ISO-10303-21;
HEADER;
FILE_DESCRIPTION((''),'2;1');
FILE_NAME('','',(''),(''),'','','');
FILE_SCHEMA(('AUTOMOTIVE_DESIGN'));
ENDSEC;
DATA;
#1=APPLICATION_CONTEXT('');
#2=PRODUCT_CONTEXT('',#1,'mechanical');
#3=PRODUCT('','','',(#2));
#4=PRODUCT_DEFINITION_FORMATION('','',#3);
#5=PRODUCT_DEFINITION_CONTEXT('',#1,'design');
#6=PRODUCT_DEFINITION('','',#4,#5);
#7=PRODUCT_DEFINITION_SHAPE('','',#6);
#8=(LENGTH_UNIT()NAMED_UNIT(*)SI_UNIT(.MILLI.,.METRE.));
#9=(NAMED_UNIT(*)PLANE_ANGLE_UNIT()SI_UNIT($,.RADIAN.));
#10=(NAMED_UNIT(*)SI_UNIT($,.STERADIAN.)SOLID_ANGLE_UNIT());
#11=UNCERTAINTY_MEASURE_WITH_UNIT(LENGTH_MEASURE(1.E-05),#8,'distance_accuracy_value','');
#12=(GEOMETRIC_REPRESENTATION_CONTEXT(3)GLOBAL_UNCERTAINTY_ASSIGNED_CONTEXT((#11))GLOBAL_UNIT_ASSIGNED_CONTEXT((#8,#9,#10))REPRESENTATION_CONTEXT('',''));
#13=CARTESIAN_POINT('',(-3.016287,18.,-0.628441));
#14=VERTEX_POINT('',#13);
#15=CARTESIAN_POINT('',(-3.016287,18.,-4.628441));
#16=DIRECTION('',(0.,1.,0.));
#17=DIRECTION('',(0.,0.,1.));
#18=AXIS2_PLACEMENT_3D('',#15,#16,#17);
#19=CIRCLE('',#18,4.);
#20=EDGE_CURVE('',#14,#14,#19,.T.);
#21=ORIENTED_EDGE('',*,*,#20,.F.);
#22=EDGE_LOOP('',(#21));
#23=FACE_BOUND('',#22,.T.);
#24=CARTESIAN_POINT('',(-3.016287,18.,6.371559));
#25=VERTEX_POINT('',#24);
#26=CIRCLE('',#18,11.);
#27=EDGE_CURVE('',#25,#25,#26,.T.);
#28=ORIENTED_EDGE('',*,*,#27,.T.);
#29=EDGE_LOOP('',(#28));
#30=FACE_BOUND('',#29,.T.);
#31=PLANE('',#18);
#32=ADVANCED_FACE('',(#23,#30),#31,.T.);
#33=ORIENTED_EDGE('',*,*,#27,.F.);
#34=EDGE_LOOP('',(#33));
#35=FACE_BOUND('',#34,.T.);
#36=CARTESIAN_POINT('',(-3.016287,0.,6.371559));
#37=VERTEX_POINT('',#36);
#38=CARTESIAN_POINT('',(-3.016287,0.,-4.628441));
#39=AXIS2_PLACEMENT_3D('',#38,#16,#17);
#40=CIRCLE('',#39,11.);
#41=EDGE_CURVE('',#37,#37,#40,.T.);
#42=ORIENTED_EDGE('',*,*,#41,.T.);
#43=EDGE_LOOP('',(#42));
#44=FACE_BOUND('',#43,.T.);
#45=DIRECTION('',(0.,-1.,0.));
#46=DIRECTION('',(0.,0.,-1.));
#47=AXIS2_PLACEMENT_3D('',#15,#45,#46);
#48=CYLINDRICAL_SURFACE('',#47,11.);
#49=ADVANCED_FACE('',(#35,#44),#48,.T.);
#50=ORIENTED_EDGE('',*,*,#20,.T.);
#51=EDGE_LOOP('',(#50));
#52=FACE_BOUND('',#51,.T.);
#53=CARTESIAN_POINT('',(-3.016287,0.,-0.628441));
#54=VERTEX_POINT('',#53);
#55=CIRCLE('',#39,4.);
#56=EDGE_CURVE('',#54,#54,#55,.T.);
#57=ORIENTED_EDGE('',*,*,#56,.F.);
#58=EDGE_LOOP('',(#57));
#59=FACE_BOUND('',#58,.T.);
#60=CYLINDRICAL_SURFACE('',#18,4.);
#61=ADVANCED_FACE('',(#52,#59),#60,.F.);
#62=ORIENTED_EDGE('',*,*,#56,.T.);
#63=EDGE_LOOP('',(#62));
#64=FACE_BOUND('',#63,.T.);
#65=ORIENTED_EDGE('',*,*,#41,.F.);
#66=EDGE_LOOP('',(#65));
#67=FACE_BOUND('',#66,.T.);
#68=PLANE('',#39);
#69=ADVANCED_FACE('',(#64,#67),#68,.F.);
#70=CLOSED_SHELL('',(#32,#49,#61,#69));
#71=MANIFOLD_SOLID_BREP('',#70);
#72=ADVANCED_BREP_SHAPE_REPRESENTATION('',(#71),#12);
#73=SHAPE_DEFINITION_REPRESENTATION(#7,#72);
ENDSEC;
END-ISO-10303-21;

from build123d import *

# Parameters (mm, degrees)
SKETCH1_R               = 11
BOSS_EXTRUDE1_DEPTH     = 18
ADVANCEDHOLE1_OUTLINE_R = 4
ADVANCEDHOLE1_DEPTH     = 18


# Read off the part's stored shape, not the designer's step: AdvancedHole1
with BuildPart() as part:
    # Sketch1 → Boss-Extrude1 (new body)
    with BuildSketch(Plane(origin=(0, 0, 0), x_dir=(1, 0, 0), z_dir=(0, 1, 0))):
        with Locations(Location((-3.016287184, 4.628440679, 0), (0, 0, 270))):
            Circle(SKETCH1_R)
    extrude(amount=BOSS_EXTRUDE1_DEPTH)

    # AdvancedHole1 outline → AdvancedHole1 (cut)
    with BuildSketch(Plane(origin=(0, 0, 0), x_dir=(1, 0, 0), z_dir=(0, 1, 0))):
        with Locations((-3.016287184, 4.628440679)):
            Circle(ADVANCEDHOLE1_OUTLINE_R)
    extrude(amount=ADVANCEDHOLE1_DEPTH, mode=Mode.SUBTRACT)


solid = part.part
